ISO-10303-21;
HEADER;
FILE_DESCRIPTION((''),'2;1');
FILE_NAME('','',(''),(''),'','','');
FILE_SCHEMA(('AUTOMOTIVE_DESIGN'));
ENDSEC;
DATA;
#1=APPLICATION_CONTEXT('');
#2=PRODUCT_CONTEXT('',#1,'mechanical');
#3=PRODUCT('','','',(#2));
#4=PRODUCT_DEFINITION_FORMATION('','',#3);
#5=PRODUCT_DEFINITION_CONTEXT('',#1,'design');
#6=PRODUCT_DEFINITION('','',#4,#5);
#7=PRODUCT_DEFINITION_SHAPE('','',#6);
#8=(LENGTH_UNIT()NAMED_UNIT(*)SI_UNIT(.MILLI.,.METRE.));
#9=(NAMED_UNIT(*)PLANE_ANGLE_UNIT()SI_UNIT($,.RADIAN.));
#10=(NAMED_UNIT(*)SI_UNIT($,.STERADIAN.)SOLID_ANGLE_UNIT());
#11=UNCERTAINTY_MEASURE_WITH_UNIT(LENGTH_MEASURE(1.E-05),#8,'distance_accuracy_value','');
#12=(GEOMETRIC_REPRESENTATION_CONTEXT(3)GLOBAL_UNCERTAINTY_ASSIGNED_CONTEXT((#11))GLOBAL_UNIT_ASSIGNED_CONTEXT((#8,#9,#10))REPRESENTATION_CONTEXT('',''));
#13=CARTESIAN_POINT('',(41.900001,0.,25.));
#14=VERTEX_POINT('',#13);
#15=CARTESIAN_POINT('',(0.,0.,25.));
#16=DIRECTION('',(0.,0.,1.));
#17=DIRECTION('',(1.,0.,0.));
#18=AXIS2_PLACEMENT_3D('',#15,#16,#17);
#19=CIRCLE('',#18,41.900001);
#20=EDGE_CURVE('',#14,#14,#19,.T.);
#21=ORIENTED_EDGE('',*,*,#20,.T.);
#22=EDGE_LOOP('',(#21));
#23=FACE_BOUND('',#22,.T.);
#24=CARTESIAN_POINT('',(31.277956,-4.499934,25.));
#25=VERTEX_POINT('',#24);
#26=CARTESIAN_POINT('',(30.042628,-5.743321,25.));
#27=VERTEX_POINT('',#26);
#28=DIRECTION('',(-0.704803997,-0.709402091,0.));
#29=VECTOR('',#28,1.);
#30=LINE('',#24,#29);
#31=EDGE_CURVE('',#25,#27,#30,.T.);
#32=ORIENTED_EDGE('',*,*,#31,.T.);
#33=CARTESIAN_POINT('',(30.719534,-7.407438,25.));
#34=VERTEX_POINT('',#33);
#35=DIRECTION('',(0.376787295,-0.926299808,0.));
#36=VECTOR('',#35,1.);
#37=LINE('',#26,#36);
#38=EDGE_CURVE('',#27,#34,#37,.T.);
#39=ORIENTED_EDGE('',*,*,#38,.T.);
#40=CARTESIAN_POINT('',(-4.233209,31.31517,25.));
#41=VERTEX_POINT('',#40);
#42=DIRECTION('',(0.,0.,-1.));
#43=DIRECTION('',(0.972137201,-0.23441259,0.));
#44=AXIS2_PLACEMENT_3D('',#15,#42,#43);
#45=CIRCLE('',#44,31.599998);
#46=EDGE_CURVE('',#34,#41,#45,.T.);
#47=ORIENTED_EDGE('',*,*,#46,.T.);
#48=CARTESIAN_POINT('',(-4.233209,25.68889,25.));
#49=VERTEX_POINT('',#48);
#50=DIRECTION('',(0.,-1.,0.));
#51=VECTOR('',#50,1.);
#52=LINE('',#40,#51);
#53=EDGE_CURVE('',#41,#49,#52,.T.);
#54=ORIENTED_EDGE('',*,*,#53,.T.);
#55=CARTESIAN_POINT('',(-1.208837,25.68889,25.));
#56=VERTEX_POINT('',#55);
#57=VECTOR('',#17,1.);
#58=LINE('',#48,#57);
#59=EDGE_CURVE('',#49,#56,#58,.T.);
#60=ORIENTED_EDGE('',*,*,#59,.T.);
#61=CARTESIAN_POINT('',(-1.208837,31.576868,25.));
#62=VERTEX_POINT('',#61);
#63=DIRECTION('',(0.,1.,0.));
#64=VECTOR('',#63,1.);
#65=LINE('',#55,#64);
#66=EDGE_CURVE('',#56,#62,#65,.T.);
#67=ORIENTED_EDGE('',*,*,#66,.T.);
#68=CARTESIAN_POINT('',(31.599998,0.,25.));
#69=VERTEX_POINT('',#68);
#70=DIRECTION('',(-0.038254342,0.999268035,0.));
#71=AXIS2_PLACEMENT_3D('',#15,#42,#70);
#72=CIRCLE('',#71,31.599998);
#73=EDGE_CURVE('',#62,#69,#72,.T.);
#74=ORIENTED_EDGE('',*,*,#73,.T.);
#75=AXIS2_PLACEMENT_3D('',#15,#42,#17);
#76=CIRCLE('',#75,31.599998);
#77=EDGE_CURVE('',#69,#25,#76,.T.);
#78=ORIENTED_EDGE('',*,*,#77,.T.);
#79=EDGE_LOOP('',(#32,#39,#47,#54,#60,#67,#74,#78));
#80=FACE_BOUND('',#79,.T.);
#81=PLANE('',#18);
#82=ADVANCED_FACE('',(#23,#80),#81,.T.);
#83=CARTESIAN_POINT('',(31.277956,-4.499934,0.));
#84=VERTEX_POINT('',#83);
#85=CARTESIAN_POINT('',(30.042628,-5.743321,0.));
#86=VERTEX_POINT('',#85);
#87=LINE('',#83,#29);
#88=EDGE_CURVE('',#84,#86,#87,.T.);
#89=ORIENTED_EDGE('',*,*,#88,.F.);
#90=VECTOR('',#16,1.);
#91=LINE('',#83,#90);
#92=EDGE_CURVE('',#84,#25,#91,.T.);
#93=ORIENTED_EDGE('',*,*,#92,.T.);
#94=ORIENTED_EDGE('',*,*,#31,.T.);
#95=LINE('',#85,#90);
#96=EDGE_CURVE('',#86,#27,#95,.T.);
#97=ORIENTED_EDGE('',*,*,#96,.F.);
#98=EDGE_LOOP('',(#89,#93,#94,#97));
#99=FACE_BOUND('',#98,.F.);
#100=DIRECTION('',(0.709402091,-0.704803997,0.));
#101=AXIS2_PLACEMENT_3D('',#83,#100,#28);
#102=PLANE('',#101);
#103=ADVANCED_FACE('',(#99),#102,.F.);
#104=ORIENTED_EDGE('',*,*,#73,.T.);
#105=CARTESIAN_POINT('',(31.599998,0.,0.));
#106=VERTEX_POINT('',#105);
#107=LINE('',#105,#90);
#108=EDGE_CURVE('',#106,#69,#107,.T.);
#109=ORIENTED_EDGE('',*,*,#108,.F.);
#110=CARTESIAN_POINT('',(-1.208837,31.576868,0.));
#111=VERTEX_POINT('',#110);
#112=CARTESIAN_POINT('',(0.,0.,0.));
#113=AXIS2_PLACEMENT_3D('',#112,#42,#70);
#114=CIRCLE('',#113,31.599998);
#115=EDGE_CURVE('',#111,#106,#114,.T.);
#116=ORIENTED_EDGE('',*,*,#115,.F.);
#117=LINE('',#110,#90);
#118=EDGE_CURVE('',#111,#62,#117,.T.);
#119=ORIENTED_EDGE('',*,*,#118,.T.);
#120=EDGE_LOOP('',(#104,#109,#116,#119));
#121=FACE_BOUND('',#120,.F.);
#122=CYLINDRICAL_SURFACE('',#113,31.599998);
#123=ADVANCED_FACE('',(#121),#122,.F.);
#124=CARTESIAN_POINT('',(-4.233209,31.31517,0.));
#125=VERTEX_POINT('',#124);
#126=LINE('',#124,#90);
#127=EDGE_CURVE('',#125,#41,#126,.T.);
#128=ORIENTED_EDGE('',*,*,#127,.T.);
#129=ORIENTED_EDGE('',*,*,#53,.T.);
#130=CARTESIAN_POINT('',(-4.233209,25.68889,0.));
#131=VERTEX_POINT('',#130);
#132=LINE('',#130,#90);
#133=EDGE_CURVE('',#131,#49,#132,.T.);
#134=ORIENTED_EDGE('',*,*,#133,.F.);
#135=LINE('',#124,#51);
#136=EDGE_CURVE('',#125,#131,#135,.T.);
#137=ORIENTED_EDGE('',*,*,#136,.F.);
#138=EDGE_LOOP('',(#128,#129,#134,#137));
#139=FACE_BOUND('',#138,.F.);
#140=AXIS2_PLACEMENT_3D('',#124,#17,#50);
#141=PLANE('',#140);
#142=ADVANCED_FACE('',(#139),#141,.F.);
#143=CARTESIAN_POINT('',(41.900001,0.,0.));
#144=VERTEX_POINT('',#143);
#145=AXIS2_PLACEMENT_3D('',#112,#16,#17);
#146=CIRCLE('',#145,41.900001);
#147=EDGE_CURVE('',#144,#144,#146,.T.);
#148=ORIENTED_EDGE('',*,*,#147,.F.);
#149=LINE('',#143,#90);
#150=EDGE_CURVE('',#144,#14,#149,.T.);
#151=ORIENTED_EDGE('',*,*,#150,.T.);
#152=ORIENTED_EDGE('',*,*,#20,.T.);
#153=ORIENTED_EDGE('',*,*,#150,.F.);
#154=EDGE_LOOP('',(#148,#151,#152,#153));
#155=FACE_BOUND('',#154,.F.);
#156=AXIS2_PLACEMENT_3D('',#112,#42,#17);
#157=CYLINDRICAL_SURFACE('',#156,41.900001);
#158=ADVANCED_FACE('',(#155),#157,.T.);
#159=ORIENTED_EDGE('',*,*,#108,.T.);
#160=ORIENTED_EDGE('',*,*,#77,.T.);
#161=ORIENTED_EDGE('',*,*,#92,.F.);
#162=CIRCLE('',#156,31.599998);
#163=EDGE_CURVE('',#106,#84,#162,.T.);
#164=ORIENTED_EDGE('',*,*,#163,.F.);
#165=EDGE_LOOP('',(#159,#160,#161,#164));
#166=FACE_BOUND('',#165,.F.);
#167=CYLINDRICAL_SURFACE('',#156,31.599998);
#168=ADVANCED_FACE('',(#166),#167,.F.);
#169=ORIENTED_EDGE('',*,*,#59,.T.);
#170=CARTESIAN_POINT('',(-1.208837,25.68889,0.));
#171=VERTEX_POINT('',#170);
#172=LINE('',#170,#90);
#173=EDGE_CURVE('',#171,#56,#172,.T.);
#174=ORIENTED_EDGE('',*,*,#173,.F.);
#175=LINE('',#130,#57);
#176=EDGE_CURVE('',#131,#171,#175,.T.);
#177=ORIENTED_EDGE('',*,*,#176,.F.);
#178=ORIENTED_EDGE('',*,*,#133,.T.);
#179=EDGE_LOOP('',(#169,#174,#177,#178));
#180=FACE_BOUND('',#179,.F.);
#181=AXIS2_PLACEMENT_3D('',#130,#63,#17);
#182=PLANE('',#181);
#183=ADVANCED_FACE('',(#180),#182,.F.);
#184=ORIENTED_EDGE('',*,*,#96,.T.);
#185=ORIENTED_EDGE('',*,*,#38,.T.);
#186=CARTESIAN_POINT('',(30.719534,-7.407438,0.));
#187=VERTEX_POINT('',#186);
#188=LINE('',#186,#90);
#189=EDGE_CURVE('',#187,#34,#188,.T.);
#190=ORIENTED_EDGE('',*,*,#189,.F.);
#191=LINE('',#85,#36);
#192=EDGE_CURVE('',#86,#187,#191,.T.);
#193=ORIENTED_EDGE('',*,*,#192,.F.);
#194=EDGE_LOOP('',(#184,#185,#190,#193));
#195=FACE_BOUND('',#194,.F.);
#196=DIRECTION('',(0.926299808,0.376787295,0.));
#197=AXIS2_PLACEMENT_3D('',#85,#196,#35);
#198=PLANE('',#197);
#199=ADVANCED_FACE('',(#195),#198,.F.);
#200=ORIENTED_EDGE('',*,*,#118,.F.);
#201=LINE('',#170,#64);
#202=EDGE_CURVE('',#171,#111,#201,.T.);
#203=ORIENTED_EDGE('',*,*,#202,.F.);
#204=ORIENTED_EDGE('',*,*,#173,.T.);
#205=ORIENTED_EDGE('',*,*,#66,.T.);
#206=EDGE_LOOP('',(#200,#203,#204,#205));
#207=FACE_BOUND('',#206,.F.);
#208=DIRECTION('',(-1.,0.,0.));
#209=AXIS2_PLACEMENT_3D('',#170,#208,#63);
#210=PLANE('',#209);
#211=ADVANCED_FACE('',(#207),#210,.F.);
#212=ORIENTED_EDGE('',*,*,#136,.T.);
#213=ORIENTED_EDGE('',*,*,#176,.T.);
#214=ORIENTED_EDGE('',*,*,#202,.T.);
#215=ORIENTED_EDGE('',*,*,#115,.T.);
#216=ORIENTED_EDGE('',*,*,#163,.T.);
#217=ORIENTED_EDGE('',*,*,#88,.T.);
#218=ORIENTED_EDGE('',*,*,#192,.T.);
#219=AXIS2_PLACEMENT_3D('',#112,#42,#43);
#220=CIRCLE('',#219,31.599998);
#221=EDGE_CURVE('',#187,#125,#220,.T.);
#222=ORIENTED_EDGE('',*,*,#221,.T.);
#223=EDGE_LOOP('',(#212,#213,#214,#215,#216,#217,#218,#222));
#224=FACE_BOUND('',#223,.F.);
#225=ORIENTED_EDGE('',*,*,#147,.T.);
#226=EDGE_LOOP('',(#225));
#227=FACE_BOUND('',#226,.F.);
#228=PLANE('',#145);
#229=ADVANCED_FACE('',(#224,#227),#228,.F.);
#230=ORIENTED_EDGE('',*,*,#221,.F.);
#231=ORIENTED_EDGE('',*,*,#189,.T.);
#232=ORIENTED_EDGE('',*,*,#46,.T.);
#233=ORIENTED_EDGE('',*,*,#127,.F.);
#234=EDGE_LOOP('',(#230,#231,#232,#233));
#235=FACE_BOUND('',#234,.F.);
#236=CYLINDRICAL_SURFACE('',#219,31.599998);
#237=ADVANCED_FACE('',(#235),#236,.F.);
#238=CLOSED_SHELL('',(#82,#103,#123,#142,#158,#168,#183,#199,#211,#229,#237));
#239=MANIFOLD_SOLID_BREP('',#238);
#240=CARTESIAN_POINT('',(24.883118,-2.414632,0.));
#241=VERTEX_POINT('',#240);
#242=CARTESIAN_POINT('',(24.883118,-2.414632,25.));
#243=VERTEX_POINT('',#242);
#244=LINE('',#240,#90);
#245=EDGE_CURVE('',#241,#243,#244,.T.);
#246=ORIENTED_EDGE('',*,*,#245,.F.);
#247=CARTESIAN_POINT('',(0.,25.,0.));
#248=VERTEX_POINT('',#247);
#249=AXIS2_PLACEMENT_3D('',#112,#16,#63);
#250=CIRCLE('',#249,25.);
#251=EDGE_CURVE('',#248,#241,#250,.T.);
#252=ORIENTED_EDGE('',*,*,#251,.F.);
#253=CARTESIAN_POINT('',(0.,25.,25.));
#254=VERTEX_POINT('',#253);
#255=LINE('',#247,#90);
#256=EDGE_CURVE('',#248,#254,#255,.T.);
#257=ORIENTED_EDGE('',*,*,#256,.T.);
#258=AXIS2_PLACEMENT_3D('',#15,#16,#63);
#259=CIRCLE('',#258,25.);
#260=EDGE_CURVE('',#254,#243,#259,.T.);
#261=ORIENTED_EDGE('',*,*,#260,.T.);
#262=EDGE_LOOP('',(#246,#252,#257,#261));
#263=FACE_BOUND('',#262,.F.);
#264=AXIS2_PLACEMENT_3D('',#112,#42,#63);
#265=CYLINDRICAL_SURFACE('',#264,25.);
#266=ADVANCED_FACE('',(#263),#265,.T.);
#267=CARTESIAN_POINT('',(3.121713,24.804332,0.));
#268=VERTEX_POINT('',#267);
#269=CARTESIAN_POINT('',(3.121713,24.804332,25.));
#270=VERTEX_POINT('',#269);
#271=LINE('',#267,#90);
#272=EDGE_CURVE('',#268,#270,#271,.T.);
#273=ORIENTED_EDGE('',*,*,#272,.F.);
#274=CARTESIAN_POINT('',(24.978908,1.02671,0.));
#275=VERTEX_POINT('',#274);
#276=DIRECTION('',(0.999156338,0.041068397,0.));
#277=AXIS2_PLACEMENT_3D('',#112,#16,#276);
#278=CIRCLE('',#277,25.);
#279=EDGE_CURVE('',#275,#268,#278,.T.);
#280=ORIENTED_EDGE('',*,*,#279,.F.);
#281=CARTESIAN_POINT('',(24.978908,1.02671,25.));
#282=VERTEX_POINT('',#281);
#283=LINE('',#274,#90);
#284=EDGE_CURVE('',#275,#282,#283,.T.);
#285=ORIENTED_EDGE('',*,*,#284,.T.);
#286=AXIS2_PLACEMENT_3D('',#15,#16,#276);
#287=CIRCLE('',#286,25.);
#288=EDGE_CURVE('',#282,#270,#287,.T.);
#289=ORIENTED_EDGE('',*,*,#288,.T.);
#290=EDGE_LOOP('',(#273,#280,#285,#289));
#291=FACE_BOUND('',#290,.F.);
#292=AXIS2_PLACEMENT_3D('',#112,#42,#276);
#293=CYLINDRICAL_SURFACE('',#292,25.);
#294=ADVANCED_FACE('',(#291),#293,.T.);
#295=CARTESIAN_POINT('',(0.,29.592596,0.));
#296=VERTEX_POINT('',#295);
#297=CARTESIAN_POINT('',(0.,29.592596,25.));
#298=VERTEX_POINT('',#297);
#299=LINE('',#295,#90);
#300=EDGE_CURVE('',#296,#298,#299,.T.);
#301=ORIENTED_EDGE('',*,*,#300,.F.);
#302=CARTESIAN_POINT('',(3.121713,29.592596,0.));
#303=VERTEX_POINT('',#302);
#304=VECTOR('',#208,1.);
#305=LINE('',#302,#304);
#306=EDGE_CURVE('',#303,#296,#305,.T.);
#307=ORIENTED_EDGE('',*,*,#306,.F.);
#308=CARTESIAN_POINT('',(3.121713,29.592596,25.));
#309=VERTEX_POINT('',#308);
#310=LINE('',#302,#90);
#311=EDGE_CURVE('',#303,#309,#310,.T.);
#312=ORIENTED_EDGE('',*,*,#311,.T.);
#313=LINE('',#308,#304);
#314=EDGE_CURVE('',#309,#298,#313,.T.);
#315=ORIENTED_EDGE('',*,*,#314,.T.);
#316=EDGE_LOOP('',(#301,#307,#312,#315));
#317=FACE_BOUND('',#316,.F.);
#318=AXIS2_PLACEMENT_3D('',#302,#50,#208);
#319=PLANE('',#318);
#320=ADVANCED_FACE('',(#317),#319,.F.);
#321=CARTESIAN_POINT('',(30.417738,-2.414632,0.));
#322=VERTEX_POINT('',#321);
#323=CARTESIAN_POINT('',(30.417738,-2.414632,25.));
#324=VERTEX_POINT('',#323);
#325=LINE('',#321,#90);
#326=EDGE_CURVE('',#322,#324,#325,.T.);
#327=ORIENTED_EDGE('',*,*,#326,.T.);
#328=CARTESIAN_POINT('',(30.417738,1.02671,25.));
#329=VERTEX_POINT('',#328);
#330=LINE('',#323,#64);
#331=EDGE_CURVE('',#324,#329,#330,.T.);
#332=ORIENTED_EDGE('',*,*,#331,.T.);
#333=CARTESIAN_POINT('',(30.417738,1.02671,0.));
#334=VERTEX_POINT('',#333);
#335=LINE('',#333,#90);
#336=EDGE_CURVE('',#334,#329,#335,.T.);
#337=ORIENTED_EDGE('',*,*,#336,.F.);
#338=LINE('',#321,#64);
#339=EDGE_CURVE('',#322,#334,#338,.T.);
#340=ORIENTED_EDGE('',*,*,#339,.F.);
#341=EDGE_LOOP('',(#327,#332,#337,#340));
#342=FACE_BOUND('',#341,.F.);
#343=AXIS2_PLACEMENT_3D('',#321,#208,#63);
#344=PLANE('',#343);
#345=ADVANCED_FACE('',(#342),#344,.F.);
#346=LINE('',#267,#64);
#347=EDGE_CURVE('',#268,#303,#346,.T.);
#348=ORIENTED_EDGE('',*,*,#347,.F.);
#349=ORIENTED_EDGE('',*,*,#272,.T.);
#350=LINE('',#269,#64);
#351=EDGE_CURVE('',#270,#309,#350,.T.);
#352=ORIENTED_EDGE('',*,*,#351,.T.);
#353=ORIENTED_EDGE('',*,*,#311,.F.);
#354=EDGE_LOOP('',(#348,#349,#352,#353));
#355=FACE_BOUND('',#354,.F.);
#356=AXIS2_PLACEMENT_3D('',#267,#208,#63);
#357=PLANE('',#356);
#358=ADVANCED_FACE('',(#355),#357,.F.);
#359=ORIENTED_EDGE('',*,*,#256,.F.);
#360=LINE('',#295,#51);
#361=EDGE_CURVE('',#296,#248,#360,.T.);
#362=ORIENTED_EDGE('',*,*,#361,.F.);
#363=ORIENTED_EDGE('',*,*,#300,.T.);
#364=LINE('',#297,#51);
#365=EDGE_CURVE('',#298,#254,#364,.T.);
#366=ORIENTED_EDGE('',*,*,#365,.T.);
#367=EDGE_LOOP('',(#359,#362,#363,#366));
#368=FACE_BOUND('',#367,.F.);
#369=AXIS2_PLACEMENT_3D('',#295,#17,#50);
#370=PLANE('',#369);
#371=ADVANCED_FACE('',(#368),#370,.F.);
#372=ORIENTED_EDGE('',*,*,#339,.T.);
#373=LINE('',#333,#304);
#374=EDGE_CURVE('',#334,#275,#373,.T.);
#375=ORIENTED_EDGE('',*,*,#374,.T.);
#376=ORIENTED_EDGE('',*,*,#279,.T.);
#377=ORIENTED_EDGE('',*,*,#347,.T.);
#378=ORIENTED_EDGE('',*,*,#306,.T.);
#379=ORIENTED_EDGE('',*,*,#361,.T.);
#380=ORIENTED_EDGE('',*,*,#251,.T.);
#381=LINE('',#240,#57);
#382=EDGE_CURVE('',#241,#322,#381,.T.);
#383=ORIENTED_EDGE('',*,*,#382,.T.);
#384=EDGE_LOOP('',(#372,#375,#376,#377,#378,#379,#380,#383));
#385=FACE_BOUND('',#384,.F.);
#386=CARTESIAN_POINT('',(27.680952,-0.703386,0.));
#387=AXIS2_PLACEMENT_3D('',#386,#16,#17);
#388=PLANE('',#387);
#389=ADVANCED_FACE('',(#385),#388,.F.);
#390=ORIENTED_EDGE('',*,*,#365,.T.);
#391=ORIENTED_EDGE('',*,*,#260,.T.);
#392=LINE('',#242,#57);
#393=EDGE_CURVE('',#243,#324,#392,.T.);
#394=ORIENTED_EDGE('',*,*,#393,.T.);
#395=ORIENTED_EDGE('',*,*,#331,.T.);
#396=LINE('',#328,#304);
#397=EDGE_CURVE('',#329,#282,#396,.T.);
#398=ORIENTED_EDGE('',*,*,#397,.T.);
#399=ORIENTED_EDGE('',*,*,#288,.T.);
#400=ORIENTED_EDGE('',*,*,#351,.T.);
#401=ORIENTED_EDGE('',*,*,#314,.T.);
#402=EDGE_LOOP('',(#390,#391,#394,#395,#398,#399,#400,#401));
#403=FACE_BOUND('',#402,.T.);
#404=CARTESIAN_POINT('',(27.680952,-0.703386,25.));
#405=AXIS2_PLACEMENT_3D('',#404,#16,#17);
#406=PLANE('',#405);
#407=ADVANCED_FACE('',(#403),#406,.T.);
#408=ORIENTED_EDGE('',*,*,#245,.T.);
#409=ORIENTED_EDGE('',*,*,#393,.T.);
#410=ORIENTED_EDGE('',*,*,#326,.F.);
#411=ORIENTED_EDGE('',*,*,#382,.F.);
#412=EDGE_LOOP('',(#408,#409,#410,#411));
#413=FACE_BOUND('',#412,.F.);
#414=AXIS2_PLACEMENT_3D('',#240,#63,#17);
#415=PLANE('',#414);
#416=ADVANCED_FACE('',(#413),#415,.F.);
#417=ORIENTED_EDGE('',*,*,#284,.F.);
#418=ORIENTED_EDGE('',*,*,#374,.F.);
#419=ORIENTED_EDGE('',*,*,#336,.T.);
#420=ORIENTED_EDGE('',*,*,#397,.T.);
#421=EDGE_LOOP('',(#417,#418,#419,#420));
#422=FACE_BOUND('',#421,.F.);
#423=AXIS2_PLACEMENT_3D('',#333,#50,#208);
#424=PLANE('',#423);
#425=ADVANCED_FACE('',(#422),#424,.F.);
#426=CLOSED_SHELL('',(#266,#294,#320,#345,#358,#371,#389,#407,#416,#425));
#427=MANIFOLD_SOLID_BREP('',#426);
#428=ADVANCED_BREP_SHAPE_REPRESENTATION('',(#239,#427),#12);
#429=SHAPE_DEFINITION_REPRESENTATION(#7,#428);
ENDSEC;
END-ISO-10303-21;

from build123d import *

# Parameters (mm, degrees)
F1_DEPTH = 25
F0_R     = 41.9000014663
F2_DEPTH = 25


# Not quite as in the source:
# - a feature names something its author has since deleted; it is built from what else it names


with BuildPart() as f1:
    # F0 (on Top) → F1 (new body)
    with BuildSketch(Plane.XY):
        with BuildLine():
            ThreePointArc((24.978908438, 1.0267099133), (24.9947265533, 0.5134632655), (25, 0))
            ThreePointArc((25, 0), (24.9707623545, -1.2087296779), (24.8831178053, -2.414632123))
            Line((24.8831178053, -2.414632123), (30.4177384824, -2.414632123))
            Line((30.4177384824, -2.414632123), (30.4177384824, 1.0267099133))
            Line((30.4177384824, 1.0267099133), (24.978908438, 1.0267099133))
        make_face()
        with BuildLine():
            Line((23.4767496586, 1.0267099133), (24.978908438, 1.0267099133))
            ThreePointArc((24.978908438, 1.0267099133), (18.4053000445, 16.9187744908), (3.1217134092, 24.8043323916))
            Line((3.1217134092, 24.8043323916), (3.1217134092, 22.8428095579))
            Line((3.1217134092, 22.8428095579), (0, 22.8428095579))
            Line((0, 22.8428095579), (0, 25))
            ThreePointArc((0, 25), (-18.5116963441, -16.8022944404), (24.8831178053, -2.414632123))
            Line((24.8831178053, -2.414632123), (23.4767496586, -2.414632123))
            Line((23.4767496586, -2.414632123), (23.4767496586, 1.0267099133))
        make_face()
        with BuildLine():
            ThreePointArc((24.8831178053, -2.414632123), (24.9707623545, -1.2087296779), (25, 0))
            ThreePointArc((25, 0), (24.9947265533, 0.5134632655), (24.978908438, 1.0267099133))
            Line((24.978908438, 1.0267099133), (23.4767496586, 1.0267099133))
            Line((23.4767496586, 1.0267099133), (23.4767496586, -2.414632123))
            Line((23.4767496586, -2.414632123), (24.8831178053, -2.414632123))
        make_face()
        with BuildLine():
            Line((3.1217134092, 22.8428095579), (3.1217134092, 24.8043323916))
            ThreePointArc((3.1217134092, 24.8043323916), (1.5639197887, 24.9510351468), (0, 25))
            Line((0, 25), (0, 22.8428095579))
            Line((0, 22.8428095579), (3.1217134092, 22.8428095579))
        make_face()
        with BuildLine():
            ThreePointArc((0, 25), (1.5639197887, 24.9510351468), (3.1217134092, 24.8043323916))
            Line((3.1217134092, 24.8043323916), (3.1217134092, 29.5925959945))
            Line((3.1217134092, 29.5925959945), (0, 29.5925959945))
            Line((0, 29.5925959945), (0, 25))
        make_face()
    extrude(amount=F1_DEPTH)


with BuildPart() as f2:
    # F0 (on Top) → F2 (new body)
    with BuildSketch(Plane.XY):
        Circle(F0_R)
        with BuildLine():
            ThreePointArc((31.2779555005, -4.4999336962), (31.0328144506, -5.9602290926), (30.7195340658, -7.4074375018))
            ThreePointArc((30.7195340658, -7.4074375018), (-23.4572255231, -21.1735324006), (-4.2332089506, 31.3151695755))
            Line((-4.2332089506, 31.3151695755), (-4.2332089506, 32.823305577))
            Line((-4.2332089506, 32.823305577), (-1.2088371441, 32.823305577))
            Line((-1.2088371441, 32.823305577), (-1.2088371441, 31.5768683742))
            ThreePointArc((-1.2088371441, 31.5768683742), (21.9130172689, 22.7679506705), (31.5999984741, 0))
            ThreePointArc((31.5999984741, 0), (31.5193849056, -2.255721334), (31.2779555005, -4.4999336962))
        make_face(mode=Mode.SUBTRACT)
        with BuildLine():
            Line((-4.2332089506, 32.823305577), (-4.2332089506, 31.3151695755))
            ThreePointArc((-4.2332089506, 31.3151695755), (-2.7241673938, 31.4823572112), (-1.2088371441, 31.5768683742))
            Line((-1.2088371441, 31.5768683742), (-1.2088371441, 32.823305577))
            Line((-1.2088371441, 32.823305577), (-4.2332089506, 32.823305577))
        make_face()
        with BuildLine():
            ThreePointArc((-1.2088371441, 31.5768683742), (-2.7241673938, 31.4823572112), (-4.2332089506, 31.3151695755))
            Line((-4.2332089506, 31.3151695755), (-4.2332089506, 25.6888903677))
            Line((-4.2332089506, 25.6888903677), (-1.2088371441, 25.6888903677))
            Line((-1.2088371441, 25.6888903677), (-1.2088371441, 31.5768683742))
        make_face()
        with BuildLine():
            Line((30.0426278263, -5.7433205657), (30.7195340658, -7.4074375018))
            ThreePointArc((30.7195340658, -7.4074375018), (31.0328144506, -5.9602290926), (31.2779555005, -4.4999336962))
            Line((31.2779555005, -4.4999336962), (30.0426278263, -5.7433205657))
        make_face()
    extrude(amount=F2_DEPTH)


solid = Compound([f1.part, f2.part])
